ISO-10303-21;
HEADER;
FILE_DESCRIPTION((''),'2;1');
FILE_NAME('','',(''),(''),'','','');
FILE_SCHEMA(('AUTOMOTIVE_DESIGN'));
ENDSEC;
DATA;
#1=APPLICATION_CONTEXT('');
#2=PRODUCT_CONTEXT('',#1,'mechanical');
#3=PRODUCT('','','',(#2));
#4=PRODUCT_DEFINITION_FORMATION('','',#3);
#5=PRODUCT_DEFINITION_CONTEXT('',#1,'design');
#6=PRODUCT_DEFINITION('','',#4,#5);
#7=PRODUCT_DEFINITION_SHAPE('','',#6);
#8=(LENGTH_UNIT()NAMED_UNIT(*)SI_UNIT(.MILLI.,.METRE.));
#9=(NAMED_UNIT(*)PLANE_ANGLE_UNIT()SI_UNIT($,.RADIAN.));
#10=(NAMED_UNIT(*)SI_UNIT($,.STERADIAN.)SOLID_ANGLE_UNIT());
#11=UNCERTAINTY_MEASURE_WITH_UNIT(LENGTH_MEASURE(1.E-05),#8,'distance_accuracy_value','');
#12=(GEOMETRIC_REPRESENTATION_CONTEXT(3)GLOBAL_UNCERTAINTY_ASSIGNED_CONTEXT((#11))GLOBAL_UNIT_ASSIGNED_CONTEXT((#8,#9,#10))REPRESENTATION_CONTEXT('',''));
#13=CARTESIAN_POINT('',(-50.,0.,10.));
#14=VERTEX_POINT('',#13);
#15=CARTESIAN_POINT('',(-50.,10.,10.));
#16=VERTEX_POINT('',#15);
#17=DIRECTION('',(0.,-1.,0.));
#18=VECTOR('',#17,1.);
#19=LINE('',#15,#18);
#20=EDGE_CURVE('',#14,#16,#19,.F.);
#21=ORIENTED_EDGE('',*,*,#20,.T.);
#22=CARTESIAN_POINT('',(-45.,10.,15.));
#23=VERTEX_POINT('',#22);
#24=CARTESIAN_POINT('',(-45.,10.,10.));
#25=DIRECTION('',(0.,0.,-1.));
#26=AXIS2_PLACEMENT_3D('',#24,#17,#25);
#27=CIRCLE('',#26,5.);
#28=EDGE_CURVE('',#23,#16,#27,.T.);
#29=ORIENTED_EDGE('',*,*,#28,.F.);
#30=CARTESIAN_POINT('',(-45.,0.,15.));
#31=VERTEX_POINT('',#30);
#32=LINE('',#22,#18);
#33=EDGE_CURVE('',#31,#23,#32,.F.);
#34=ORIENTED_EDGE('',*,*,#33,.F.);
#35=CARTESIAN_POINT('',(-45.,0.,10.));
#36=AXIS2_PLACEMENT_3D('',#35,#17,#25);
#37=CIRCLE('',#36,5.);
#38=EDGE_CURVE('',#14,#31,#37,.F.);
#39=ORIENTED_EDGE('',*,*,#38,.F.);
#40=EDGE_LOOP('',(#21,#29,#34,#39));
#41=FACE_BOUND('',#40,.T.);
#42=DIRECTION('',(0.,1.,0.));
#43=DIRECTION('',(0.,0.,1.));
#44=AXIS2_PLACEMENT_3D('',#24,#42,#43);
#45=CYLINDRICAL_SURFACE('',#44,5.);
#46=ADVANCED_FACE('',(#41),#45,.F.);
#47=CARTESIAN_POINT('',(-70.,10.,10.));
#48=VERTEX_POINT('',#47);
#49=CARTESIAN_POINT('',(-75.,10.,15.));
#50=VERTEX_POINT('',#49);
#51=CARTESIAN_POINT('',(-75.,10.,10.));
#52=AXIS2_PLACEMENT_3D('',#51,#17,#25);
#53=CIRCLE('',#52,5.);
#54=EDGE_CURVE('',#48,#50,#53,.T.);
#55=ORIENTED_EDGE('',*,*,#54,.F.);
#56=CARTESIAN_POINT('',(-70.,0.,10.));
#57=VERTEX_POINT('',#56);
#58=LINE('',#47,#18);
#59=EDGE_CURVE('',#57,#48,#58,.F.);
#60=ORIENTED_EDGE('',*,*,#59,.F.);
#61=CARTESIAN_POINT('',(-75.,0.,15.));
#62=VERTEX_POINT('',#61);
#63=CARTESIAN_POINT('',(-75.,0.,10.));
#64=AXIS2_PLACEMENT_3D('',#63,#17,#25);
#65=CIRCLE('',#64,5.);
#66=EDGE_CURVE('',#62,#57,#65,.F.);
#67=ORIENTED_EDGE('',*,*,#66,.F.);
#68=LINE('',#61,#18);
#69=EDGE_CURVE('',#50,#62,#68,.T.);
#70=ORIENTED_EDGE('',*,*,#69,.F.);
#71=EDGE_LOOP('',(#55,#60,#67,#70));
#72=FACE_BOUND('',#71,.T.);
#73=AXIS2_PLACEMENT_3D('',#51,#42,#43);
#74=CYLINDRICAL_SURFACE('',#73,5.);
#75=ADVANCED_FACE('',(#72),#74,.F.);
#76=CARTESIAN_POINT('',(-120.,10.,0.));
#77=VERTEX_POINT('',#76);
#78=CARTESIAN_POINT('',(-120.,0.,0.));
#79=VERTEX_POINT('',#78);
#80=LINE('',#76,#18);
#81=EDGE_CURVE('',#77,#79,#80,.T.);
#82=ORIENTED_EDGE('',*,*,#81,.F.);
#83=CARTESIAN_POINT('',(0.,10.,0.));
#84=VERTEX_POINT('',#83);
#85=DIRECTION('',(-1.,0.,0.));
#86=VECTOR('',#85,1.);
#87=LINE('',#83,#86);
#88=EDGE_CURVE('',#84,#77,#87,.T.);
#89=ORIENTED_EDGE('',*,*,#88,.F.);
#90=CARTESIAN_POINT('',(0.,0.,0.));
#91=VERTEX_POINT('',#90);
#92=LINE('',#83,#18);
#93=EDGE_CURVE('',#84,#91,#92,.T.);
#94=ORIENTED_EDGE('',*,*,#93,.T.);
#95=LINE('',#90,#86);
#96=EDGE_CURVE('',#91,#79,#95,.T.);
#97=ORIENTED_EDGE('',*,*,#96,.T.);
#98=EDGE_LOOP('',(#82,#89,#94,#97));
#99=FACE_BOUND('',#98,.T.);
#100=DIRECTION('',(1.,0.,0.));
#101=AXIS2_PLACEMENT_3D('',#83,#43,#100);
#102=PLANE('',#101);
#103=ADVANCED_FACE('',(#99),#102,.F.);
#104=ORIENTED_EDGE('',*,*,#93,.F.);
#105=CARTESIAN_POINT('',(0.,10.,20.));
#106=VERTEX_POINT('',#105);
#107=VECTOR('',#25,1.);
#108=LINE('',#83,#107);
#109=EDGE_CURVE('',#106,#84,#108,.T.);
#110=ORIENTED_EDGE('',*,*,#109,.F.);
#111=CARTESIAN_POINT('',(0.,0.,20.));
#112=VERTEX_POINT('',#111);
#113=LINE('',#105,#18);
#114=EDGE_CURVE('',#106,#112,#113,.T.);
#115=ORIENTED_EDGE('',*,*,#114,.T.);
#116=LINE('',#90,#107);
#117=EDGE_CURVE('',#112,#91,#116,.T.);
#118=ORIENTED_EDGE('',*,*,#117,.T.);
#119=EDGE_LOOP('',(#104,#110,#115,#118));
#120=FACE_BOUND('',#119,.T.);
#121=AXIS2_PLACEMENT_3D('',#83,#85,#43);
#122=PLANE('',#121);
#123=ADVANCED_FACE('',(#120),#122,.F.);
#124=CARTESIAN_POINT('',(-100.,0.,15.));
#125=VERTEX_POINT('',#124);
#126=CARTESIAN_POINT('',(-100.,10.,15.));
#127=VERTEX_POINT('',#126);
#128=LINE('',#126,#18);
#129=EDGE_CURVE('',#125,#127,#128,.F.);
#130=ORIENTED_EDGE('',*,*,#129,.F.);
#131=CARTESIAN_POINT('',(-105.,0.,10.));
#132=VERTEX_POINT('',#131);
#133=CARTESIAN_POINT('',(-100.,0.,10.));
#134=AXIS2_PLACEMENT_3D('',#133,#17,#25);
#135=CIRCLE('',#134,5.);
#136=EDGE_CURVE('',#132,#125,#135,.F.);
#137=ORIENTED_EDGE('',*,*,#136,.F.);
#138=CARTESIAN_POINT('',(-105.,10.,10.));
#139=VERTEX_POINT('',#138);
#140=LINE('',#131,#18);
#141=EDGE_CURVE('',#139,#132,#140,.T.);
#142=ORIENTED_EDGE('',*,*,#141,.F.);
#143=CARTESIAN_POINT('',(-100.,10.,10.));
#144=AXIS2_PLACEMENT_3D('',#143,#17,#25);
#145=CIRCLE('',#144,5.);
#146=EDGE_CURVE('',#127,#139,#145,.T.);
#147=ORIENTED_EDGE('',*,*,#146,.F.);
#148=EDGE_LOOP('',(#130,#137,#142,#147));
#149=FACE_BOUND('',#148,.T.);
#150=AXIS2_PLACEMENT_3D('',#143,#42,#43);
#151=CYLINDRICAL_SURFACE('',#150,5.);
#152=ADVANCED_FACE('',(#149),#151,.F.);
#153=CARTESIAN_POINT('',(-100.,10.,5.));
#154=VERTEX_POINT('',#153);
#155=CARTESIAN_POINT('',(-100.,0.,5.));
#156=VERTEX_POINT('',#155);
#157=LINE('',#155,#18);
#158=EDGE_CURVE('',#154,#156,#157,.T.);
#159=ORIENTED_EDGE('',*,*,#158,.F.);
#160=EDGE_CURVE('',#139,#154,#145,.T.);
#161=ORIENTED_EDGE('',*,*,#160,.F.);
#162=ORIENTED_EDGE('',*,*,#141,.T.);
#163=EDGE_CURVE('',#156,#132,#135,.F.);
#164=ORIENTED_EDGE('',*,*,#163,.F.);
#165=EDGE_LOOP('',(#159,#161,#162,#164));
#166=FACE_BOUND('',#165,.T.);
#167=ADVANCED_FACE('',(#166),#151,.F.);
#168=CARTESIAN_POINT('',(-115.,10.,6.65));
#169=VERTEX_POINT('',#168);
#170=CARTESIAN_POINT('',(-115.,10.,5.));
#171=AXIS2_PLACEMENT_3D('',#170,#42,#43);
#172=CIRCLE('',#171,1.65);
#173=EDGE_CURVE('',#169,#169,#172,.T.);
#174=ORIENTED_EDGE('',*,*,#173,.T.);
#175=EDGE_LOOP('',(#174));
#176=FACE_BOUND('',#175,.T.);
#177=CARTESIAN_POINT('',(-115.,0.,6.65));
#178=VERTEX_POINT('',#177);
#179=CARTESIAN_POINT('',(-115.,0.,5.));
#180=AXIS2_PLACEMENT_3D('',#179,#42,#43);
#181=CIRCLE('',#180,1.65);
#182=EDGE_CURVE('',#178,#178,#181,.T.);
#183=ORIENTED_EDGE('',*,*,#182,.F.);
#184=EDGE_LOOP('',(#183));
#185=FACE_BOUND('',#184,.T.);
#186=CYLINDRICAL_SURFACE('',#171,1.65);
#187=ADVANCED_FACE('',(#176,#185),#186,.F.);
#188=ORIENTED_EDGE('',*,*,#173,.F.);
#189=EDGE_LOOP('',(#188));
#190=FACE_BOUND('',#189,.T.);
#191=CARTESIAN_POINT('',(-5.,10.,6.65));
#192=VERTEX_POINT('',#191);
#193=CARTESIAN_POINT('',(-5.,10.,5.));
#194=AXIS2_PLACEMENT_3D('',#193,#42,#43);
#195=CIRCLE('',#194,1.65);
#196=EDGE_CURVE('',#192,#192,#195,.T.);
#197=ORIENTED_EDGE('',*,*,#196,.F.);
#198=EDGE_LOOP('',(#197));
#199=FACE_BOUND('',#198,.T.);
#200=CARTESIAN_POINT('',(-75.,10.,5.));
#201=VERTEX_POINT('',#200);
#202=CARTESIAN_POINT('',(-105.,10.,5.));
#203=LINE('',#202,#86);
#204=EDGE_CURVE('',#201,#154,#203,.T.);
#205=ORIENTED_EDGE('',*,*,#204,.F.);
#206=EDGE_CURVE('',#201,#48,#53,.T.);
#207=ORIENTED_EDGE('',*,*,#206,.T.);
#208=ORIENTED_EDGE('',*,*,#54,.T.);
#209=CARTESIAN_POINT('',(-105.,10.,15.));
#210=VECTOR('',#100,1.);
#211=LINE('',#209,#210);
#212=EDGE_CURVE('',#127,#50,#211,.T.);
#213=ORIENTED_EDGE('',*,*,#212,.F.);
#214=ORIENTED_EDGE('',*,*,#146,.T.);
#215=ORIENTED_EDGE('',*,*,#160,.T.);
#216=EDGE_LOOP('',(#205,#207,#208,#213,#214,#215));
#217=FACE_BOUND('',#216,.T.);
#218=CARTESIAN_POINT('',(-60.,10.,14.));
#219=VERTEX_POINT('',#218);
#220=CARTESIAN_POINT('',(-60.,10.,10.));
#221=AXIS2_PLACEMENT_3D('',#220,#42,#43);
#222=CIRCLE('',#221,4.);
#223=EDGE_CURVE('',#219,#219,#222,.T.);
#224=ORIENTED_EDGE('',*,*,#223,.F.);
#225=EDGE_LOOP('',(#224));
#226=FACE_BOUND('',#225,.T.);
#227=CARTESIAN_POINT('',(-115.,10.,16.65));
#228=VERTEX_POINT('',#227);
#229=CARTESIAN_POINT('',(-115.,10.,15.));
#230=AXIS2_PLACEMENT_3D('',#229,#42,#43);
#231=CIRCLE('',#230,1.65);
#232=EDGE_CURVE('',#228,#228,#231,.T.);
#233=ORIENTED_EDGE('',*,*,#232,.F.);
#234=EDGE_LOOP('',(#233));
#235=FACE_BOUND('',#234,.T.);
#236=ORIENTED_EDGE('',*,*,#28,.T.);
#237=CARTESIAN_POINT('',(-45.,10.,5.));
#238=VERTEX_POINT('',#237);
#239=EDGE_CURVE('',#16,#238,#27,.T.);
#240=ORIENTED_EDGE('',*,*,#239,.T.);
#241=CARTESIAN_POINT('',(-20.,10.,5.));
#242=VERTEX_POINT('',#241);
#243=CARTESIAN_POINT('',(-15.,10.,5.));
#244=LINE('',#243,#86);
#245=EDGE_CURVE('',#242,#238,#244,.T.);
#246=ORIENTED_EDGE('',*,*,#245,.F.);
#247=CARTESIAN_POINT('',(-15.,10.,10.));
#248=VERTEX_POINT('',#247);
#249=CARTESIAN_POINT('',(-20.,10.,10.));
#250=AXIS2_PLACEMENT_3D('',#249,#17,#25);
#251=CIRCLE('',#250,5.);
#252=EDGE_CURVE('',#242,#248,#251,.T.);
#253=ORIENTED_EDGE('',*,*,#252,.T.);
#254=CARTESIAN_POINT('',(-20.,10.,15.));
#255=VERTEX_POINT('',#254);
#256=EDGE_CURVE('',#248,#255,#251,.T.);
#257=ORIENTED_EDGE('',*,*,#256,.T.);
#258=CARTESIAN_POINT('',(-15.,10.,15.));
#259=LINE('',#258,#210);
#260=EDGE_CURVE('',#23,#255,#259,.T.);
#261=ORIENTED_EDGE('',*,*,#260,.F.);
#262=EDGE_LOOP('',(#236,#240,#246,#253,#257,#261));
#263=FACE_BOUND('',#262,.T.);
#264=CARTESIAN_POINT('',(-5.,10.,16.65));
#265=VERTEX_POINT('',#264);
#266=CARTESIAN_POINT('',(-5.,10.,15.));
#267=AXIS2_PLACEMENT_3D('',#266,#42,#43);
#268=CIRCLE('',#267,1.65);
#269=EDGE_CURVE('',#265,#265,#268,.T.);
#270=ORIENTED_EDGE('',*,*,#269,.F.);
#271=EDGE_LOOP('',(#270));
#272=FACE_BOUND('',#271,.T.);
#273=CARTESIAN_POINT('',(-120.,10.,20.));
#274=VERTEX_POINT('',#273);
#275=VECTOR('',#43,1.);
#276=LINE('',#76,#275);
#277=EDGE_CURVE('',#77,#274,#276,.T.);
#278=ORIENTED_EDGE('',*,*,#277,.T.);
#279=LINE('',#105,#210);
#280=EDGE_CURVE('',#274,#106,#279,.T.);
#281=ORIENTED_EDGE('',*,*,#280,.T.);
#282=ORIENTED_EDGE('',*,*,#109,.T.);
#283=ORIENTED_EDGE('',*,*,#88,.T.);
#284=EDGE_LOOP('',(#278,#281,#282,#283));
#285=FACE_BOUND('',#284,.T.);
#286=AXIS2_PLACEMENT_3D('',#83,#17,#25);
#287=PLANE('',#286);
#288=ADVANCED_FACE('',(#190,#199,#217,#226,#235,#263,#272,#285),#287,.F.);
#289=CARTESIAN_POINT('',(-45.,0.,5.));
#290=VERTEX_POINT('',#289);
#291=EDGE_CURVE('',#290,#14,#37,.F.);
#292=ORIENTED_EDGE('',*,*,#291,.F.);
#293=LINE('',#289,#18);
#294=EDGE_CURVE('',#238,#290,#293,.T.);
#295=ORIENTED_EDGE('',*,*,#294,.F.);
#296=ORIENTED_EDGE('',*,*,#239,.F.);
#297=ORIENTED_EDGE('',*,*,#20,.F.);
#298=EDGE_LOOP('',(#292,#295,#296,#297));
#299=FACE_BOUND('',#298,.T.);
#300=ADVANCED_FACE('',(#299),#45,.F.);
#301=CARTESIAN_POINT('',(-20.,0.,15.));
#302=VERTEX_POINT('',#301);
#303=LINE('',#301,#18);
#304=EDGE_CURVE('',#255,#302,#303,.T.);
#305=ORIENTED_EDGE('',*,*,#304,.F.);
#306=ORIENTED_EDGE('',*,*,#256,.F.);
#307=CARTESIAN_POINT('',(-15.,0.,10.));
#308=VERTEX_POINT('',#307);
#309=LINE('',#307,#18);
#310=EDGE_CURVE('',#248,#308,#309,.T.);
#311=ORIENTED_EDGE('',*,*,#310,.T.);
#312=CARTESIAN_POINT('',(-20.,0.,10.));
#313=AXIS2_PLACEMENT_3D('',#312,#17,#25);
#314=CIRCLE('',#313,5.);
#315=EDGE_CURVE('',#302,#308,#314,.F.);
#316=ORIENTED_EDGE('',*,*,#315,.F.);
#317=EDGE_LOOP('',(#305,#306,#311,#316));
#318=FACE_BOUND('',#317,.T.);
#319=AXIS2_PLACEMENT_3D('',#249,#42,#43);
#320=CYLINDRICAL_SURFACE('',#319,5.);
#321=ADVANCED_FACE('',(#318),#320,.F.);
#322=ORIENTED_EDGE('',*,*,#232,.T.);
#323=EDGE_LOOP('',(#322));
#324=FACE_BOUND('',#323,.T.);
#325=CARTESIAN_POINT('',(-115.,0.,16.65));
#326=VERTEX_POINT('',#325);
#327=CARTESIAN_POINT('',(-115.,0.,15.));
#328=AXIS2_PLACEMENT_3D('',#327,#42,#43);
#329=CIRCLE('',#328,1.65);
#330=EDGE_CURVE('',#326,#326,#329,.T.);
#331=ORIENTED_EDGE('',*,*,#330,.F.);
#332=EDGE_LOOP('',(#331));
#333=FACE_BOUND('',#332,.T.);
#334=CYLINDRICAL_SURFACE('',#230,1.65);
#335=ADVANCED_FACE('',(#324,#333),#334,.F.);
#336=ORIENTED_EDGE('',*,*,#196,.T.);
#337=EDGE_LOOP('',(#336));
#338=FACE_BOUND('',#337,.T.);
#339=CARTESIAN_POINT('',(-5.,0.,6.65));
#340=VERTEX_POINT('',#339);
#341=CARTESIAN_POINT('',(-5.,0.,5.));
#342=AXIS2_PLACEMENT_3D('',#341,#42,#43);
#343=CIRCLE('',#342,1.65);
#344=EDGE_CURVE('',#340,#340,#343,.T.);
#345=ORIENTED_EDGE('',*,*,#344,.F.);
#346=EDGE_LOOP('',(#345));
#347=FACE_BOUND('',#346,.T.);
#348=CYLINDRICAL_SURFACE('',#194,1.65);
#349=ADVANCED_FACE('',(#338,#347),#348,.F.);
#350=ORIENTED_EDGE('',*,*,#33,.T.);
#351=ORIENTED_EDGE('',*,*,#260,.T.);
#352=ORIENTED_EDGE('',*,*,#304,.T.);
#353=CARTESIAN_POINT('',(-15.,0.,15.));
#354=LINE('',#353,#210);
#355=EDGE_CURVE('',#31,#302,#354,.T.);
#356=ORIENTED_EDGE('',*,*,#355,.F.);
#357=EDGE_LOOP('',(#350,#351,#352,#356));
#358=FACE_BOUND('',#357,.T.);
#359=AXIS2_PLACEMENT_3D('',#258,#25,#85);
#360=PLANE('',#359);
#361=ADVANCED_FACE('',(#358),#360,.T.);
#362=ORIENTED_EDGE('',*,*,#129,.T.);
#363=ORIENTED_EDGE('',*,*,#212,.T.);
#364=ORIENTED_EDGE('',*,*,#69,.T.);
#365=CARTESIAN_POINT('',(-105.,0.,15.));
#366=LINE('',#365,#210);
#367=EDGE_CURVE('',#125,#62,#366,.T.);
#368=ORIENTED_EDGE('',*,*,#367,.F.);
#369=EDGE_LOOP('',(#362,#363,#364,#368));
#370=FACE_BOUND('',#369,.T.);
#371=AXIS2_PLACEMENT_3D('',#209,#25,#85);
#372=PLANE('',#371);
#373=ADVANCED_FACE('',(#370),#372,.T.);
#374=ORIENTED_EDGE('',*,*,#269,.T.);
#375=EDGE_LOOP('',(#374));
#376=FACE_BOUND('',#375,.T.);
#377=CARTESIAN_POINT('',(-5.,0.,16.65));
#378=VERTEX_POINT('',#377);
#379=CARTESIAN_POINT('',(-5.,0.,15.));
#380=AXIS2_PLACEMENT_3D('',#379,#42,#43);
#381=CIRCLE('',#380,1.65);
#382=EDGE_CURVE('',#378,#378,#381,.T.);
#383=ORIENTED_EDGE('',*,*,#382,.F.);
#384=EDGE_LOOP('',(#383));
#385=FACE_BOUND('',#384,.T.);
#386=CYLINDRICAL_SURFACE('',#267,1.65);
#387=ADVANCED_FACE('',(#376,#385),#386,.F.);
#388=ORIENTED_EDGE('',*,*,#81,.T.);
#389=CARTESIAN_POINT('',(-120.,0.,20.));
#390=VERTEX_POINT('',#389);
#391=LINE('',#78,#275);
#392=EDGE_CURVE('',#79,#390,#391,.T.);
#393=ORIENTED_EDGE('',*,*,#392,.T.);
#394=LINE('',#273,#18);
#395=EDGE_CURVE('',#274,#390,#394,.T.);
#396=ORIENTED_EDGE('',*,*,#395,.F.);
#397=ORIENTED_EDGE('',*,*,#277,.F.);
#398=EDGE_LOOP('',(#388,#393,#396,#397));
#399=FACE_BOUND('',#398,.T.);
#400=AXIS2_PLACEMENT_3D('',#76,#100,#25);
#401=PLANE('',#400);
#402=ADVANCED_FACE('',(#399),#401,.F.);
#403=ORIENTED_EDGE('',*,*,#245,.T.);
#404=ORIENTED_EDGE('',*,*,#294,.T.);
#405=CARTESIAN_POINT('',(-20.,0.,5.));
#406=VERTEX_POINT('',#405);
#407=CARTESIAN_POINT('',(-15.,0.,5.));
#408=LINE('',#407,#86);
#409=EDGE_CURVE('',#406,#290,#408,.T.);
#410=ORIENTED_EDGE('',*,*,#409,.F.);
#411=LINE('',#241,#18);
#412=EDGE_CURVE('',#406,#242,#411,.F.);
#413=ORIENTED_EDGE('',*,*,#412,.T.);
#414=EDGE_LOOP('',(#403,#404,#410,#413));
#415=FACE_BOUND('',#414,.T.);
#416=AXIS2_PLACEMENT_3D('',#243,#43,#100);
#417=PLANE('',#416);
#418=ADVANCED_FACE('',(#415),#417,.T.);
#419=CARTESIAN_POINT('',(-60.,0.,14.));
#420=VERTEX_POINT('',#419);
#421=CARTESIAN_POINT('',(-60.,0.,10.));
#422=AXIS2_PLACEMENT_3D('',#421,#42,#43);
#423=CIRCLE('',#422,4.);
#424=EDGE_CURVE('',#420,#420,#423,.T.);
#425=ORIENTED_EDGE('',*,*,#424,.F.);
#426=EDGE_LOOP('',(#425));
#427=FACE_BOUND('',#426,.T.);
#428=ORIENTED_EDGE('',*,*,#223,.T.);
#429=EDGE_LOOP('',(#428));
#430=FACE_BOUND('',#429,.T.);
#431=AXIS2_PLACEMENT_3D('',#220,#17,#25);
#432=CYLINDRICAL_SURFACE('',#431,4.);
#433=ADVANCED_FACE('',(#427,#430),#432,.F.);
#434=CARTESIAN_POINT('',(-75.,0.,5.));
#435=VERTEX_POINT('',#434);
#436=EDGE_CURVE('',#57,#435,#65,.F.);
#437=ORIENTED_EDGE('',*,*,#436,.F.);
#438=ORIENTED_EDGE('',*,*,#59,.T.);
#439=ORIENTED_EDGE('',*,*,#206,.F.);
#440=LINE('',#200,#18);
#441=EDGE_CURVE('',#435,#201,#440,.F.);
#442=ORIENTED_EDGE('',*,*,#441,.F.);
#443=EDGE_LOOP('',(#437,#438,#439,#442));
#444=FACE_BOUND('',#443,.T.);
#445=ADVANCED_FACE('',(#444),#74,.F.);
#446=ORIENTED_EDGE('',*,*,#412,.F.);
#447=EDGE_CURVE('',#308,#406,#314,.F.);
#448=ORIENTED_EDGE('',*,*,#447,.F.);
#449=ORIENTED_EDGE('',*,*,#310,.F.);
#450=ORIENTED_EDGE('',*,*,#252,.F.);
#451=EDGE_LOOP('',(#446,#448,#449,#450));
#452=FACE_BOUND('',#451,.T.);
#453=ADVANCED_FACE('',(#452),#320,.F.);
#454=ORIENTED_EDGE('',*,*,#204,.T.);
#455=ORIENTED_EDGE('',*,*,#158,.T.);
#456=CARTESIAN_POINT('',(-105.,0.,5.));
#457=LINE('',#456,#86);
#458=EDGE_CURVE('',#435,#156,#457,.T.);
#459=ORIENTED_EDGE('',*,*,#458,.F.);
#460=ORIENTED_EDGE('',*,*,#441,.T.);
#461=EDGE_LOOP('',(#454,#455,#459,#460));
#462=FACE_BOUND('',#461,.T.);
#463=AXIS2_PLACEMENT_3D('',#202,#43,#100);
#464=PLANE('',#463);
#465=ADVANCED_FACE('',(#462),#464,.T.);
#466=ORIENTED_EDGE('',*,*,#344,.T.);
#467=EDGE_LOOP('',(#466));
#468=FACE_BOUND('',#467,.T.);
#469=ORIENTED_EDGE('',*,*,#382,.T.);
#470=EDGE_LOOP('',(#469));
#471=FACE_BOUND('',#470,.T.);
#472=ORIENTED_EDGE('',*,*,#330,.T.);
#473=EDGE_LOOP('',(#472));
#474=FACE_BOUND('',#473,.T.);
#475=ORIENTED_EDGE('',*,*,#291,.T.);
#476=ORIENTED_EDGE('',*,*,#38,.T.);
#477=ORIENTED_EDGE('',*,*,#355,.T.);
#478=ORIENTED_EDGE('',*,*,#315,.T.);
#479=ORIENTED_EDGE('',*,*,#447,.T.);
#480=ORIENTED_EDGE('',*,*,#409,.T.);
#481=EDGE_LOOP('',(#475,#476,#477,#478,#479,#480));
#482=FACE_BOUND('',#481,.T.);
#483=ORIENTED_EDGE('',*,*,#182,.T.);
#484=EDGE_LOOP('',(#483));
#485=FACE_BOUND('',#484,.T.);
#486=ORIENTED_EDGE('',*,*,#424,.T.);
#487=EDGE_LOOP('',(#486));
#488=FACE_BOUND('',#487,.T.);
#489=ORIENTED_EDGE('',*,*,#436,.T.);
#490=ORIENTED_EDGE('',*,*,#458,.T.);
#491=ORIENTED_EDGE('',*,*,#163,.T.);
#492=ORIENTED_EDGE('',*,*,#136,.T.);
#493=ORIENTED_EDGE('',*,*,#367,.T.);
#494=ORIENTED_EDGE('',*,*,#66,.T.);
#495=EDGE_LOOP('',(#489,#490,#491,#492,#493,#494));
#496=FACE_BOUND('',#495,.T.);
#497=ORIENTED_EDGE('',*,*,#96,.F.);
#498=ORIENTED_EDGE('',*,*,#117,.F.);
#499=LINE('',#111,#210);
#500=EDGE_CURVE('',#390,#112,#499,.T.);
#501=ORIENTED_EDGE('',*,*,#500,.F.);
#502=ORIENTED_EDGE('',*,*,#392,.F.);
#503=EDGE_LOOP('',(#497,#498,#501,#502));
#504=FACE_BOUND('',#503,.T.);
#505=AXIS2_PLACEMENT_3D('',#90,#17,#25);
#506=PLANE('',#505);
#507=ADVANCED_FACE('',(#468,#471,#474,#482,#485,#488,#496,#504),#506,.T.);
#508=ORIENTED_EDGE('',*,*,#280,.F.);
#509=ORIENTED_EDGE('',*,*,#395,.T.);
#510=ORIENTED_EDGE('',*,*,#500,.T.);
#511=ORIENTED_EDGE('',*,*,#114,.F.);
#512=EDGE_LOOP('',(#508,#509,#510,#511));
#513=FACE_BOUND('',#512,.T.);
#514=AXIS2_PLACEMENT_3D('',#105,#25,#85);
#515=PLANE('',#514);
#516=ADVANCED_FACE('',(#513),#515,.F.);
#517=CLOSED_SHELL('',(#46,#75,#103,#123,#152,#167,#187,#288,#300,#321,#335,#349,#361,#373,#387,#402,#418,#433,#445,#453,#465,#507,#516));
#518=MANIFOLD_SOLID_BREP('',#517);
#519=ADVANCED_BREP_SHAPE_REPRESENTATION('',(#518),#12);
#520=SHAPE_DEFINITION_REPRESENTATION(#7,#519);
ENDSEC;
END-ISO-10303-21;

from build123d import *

# Parameters (mm, degrees)
SKETCH1_W             = 120
SKETCH1_H             = 20
SKETCH1_R             = 4
SKETCH1_W_2           = 35
SKETCH1_H_2           = 10
BOSS_EXTRUDE1_DEPTH   = 10
FILLET1_R             = 5
M4X0_7_TAPPED_HOLE1_D = 3.3


with BuildPart() as part:
    # Sketch1 → Boss-Extrude1 (new body)
    with BuildSketch(Plane(origin=(0, 0, 0), x_dir=(1, 0, 0), z_dir=(0, 1, 0))):
        with Locations((-60, -10)):
            Rectangle(SKETCH1_W, SKETCH1_H)
        with Locations(Location((-60, -10, 0), (0, 0, 270))):
            Circle(SKETCH1_R, mode=Mode.SUBTRACT)
        with Locations((-87.5, -10)):
            Rectangle(SKETCH1_W_2, SKETCH1_H_2, mode=Mode.SUBTRACT)
        with Locations((-32.5, -10)):
            Rectangle(SKETCH1_W_2, SKETCH1_H_2, mode=Mode.SUBTRACT)
    extrude(amount=BOSS_EXTRUDE1_DEPTH)

    # Fillet1
    fillet1_edges = [part.edges().sort_by_distance(p)[0] for p in [
        (-15, 5, 15),
        (-15, 5, 5),
        (-50, 5, 15),
        (-50, 5, 5),
        (-105, 5, 5),
        (-105, 5, 15),
        (-70, 5, 5),
        (-70, 5, 15),
    ]]
    fillet(fillet1_edges, radius=FILLET1_R - 0.0001)  # a hair under: the kernel refuses the full size

    # M4x0.7 Tapped Hole1 (through all)
    with Locations(Plane(origin=(0, 10, 0), x_dir=(1, 0, 0), z_dir=(0, 1, 0))):
        with Locations((-115, -5), (-115, -15), (-5, -5), (-5, -15)):
            Hole(M4X0_7_TAPPED_HOLE1_D / 2)


solid = part.part
